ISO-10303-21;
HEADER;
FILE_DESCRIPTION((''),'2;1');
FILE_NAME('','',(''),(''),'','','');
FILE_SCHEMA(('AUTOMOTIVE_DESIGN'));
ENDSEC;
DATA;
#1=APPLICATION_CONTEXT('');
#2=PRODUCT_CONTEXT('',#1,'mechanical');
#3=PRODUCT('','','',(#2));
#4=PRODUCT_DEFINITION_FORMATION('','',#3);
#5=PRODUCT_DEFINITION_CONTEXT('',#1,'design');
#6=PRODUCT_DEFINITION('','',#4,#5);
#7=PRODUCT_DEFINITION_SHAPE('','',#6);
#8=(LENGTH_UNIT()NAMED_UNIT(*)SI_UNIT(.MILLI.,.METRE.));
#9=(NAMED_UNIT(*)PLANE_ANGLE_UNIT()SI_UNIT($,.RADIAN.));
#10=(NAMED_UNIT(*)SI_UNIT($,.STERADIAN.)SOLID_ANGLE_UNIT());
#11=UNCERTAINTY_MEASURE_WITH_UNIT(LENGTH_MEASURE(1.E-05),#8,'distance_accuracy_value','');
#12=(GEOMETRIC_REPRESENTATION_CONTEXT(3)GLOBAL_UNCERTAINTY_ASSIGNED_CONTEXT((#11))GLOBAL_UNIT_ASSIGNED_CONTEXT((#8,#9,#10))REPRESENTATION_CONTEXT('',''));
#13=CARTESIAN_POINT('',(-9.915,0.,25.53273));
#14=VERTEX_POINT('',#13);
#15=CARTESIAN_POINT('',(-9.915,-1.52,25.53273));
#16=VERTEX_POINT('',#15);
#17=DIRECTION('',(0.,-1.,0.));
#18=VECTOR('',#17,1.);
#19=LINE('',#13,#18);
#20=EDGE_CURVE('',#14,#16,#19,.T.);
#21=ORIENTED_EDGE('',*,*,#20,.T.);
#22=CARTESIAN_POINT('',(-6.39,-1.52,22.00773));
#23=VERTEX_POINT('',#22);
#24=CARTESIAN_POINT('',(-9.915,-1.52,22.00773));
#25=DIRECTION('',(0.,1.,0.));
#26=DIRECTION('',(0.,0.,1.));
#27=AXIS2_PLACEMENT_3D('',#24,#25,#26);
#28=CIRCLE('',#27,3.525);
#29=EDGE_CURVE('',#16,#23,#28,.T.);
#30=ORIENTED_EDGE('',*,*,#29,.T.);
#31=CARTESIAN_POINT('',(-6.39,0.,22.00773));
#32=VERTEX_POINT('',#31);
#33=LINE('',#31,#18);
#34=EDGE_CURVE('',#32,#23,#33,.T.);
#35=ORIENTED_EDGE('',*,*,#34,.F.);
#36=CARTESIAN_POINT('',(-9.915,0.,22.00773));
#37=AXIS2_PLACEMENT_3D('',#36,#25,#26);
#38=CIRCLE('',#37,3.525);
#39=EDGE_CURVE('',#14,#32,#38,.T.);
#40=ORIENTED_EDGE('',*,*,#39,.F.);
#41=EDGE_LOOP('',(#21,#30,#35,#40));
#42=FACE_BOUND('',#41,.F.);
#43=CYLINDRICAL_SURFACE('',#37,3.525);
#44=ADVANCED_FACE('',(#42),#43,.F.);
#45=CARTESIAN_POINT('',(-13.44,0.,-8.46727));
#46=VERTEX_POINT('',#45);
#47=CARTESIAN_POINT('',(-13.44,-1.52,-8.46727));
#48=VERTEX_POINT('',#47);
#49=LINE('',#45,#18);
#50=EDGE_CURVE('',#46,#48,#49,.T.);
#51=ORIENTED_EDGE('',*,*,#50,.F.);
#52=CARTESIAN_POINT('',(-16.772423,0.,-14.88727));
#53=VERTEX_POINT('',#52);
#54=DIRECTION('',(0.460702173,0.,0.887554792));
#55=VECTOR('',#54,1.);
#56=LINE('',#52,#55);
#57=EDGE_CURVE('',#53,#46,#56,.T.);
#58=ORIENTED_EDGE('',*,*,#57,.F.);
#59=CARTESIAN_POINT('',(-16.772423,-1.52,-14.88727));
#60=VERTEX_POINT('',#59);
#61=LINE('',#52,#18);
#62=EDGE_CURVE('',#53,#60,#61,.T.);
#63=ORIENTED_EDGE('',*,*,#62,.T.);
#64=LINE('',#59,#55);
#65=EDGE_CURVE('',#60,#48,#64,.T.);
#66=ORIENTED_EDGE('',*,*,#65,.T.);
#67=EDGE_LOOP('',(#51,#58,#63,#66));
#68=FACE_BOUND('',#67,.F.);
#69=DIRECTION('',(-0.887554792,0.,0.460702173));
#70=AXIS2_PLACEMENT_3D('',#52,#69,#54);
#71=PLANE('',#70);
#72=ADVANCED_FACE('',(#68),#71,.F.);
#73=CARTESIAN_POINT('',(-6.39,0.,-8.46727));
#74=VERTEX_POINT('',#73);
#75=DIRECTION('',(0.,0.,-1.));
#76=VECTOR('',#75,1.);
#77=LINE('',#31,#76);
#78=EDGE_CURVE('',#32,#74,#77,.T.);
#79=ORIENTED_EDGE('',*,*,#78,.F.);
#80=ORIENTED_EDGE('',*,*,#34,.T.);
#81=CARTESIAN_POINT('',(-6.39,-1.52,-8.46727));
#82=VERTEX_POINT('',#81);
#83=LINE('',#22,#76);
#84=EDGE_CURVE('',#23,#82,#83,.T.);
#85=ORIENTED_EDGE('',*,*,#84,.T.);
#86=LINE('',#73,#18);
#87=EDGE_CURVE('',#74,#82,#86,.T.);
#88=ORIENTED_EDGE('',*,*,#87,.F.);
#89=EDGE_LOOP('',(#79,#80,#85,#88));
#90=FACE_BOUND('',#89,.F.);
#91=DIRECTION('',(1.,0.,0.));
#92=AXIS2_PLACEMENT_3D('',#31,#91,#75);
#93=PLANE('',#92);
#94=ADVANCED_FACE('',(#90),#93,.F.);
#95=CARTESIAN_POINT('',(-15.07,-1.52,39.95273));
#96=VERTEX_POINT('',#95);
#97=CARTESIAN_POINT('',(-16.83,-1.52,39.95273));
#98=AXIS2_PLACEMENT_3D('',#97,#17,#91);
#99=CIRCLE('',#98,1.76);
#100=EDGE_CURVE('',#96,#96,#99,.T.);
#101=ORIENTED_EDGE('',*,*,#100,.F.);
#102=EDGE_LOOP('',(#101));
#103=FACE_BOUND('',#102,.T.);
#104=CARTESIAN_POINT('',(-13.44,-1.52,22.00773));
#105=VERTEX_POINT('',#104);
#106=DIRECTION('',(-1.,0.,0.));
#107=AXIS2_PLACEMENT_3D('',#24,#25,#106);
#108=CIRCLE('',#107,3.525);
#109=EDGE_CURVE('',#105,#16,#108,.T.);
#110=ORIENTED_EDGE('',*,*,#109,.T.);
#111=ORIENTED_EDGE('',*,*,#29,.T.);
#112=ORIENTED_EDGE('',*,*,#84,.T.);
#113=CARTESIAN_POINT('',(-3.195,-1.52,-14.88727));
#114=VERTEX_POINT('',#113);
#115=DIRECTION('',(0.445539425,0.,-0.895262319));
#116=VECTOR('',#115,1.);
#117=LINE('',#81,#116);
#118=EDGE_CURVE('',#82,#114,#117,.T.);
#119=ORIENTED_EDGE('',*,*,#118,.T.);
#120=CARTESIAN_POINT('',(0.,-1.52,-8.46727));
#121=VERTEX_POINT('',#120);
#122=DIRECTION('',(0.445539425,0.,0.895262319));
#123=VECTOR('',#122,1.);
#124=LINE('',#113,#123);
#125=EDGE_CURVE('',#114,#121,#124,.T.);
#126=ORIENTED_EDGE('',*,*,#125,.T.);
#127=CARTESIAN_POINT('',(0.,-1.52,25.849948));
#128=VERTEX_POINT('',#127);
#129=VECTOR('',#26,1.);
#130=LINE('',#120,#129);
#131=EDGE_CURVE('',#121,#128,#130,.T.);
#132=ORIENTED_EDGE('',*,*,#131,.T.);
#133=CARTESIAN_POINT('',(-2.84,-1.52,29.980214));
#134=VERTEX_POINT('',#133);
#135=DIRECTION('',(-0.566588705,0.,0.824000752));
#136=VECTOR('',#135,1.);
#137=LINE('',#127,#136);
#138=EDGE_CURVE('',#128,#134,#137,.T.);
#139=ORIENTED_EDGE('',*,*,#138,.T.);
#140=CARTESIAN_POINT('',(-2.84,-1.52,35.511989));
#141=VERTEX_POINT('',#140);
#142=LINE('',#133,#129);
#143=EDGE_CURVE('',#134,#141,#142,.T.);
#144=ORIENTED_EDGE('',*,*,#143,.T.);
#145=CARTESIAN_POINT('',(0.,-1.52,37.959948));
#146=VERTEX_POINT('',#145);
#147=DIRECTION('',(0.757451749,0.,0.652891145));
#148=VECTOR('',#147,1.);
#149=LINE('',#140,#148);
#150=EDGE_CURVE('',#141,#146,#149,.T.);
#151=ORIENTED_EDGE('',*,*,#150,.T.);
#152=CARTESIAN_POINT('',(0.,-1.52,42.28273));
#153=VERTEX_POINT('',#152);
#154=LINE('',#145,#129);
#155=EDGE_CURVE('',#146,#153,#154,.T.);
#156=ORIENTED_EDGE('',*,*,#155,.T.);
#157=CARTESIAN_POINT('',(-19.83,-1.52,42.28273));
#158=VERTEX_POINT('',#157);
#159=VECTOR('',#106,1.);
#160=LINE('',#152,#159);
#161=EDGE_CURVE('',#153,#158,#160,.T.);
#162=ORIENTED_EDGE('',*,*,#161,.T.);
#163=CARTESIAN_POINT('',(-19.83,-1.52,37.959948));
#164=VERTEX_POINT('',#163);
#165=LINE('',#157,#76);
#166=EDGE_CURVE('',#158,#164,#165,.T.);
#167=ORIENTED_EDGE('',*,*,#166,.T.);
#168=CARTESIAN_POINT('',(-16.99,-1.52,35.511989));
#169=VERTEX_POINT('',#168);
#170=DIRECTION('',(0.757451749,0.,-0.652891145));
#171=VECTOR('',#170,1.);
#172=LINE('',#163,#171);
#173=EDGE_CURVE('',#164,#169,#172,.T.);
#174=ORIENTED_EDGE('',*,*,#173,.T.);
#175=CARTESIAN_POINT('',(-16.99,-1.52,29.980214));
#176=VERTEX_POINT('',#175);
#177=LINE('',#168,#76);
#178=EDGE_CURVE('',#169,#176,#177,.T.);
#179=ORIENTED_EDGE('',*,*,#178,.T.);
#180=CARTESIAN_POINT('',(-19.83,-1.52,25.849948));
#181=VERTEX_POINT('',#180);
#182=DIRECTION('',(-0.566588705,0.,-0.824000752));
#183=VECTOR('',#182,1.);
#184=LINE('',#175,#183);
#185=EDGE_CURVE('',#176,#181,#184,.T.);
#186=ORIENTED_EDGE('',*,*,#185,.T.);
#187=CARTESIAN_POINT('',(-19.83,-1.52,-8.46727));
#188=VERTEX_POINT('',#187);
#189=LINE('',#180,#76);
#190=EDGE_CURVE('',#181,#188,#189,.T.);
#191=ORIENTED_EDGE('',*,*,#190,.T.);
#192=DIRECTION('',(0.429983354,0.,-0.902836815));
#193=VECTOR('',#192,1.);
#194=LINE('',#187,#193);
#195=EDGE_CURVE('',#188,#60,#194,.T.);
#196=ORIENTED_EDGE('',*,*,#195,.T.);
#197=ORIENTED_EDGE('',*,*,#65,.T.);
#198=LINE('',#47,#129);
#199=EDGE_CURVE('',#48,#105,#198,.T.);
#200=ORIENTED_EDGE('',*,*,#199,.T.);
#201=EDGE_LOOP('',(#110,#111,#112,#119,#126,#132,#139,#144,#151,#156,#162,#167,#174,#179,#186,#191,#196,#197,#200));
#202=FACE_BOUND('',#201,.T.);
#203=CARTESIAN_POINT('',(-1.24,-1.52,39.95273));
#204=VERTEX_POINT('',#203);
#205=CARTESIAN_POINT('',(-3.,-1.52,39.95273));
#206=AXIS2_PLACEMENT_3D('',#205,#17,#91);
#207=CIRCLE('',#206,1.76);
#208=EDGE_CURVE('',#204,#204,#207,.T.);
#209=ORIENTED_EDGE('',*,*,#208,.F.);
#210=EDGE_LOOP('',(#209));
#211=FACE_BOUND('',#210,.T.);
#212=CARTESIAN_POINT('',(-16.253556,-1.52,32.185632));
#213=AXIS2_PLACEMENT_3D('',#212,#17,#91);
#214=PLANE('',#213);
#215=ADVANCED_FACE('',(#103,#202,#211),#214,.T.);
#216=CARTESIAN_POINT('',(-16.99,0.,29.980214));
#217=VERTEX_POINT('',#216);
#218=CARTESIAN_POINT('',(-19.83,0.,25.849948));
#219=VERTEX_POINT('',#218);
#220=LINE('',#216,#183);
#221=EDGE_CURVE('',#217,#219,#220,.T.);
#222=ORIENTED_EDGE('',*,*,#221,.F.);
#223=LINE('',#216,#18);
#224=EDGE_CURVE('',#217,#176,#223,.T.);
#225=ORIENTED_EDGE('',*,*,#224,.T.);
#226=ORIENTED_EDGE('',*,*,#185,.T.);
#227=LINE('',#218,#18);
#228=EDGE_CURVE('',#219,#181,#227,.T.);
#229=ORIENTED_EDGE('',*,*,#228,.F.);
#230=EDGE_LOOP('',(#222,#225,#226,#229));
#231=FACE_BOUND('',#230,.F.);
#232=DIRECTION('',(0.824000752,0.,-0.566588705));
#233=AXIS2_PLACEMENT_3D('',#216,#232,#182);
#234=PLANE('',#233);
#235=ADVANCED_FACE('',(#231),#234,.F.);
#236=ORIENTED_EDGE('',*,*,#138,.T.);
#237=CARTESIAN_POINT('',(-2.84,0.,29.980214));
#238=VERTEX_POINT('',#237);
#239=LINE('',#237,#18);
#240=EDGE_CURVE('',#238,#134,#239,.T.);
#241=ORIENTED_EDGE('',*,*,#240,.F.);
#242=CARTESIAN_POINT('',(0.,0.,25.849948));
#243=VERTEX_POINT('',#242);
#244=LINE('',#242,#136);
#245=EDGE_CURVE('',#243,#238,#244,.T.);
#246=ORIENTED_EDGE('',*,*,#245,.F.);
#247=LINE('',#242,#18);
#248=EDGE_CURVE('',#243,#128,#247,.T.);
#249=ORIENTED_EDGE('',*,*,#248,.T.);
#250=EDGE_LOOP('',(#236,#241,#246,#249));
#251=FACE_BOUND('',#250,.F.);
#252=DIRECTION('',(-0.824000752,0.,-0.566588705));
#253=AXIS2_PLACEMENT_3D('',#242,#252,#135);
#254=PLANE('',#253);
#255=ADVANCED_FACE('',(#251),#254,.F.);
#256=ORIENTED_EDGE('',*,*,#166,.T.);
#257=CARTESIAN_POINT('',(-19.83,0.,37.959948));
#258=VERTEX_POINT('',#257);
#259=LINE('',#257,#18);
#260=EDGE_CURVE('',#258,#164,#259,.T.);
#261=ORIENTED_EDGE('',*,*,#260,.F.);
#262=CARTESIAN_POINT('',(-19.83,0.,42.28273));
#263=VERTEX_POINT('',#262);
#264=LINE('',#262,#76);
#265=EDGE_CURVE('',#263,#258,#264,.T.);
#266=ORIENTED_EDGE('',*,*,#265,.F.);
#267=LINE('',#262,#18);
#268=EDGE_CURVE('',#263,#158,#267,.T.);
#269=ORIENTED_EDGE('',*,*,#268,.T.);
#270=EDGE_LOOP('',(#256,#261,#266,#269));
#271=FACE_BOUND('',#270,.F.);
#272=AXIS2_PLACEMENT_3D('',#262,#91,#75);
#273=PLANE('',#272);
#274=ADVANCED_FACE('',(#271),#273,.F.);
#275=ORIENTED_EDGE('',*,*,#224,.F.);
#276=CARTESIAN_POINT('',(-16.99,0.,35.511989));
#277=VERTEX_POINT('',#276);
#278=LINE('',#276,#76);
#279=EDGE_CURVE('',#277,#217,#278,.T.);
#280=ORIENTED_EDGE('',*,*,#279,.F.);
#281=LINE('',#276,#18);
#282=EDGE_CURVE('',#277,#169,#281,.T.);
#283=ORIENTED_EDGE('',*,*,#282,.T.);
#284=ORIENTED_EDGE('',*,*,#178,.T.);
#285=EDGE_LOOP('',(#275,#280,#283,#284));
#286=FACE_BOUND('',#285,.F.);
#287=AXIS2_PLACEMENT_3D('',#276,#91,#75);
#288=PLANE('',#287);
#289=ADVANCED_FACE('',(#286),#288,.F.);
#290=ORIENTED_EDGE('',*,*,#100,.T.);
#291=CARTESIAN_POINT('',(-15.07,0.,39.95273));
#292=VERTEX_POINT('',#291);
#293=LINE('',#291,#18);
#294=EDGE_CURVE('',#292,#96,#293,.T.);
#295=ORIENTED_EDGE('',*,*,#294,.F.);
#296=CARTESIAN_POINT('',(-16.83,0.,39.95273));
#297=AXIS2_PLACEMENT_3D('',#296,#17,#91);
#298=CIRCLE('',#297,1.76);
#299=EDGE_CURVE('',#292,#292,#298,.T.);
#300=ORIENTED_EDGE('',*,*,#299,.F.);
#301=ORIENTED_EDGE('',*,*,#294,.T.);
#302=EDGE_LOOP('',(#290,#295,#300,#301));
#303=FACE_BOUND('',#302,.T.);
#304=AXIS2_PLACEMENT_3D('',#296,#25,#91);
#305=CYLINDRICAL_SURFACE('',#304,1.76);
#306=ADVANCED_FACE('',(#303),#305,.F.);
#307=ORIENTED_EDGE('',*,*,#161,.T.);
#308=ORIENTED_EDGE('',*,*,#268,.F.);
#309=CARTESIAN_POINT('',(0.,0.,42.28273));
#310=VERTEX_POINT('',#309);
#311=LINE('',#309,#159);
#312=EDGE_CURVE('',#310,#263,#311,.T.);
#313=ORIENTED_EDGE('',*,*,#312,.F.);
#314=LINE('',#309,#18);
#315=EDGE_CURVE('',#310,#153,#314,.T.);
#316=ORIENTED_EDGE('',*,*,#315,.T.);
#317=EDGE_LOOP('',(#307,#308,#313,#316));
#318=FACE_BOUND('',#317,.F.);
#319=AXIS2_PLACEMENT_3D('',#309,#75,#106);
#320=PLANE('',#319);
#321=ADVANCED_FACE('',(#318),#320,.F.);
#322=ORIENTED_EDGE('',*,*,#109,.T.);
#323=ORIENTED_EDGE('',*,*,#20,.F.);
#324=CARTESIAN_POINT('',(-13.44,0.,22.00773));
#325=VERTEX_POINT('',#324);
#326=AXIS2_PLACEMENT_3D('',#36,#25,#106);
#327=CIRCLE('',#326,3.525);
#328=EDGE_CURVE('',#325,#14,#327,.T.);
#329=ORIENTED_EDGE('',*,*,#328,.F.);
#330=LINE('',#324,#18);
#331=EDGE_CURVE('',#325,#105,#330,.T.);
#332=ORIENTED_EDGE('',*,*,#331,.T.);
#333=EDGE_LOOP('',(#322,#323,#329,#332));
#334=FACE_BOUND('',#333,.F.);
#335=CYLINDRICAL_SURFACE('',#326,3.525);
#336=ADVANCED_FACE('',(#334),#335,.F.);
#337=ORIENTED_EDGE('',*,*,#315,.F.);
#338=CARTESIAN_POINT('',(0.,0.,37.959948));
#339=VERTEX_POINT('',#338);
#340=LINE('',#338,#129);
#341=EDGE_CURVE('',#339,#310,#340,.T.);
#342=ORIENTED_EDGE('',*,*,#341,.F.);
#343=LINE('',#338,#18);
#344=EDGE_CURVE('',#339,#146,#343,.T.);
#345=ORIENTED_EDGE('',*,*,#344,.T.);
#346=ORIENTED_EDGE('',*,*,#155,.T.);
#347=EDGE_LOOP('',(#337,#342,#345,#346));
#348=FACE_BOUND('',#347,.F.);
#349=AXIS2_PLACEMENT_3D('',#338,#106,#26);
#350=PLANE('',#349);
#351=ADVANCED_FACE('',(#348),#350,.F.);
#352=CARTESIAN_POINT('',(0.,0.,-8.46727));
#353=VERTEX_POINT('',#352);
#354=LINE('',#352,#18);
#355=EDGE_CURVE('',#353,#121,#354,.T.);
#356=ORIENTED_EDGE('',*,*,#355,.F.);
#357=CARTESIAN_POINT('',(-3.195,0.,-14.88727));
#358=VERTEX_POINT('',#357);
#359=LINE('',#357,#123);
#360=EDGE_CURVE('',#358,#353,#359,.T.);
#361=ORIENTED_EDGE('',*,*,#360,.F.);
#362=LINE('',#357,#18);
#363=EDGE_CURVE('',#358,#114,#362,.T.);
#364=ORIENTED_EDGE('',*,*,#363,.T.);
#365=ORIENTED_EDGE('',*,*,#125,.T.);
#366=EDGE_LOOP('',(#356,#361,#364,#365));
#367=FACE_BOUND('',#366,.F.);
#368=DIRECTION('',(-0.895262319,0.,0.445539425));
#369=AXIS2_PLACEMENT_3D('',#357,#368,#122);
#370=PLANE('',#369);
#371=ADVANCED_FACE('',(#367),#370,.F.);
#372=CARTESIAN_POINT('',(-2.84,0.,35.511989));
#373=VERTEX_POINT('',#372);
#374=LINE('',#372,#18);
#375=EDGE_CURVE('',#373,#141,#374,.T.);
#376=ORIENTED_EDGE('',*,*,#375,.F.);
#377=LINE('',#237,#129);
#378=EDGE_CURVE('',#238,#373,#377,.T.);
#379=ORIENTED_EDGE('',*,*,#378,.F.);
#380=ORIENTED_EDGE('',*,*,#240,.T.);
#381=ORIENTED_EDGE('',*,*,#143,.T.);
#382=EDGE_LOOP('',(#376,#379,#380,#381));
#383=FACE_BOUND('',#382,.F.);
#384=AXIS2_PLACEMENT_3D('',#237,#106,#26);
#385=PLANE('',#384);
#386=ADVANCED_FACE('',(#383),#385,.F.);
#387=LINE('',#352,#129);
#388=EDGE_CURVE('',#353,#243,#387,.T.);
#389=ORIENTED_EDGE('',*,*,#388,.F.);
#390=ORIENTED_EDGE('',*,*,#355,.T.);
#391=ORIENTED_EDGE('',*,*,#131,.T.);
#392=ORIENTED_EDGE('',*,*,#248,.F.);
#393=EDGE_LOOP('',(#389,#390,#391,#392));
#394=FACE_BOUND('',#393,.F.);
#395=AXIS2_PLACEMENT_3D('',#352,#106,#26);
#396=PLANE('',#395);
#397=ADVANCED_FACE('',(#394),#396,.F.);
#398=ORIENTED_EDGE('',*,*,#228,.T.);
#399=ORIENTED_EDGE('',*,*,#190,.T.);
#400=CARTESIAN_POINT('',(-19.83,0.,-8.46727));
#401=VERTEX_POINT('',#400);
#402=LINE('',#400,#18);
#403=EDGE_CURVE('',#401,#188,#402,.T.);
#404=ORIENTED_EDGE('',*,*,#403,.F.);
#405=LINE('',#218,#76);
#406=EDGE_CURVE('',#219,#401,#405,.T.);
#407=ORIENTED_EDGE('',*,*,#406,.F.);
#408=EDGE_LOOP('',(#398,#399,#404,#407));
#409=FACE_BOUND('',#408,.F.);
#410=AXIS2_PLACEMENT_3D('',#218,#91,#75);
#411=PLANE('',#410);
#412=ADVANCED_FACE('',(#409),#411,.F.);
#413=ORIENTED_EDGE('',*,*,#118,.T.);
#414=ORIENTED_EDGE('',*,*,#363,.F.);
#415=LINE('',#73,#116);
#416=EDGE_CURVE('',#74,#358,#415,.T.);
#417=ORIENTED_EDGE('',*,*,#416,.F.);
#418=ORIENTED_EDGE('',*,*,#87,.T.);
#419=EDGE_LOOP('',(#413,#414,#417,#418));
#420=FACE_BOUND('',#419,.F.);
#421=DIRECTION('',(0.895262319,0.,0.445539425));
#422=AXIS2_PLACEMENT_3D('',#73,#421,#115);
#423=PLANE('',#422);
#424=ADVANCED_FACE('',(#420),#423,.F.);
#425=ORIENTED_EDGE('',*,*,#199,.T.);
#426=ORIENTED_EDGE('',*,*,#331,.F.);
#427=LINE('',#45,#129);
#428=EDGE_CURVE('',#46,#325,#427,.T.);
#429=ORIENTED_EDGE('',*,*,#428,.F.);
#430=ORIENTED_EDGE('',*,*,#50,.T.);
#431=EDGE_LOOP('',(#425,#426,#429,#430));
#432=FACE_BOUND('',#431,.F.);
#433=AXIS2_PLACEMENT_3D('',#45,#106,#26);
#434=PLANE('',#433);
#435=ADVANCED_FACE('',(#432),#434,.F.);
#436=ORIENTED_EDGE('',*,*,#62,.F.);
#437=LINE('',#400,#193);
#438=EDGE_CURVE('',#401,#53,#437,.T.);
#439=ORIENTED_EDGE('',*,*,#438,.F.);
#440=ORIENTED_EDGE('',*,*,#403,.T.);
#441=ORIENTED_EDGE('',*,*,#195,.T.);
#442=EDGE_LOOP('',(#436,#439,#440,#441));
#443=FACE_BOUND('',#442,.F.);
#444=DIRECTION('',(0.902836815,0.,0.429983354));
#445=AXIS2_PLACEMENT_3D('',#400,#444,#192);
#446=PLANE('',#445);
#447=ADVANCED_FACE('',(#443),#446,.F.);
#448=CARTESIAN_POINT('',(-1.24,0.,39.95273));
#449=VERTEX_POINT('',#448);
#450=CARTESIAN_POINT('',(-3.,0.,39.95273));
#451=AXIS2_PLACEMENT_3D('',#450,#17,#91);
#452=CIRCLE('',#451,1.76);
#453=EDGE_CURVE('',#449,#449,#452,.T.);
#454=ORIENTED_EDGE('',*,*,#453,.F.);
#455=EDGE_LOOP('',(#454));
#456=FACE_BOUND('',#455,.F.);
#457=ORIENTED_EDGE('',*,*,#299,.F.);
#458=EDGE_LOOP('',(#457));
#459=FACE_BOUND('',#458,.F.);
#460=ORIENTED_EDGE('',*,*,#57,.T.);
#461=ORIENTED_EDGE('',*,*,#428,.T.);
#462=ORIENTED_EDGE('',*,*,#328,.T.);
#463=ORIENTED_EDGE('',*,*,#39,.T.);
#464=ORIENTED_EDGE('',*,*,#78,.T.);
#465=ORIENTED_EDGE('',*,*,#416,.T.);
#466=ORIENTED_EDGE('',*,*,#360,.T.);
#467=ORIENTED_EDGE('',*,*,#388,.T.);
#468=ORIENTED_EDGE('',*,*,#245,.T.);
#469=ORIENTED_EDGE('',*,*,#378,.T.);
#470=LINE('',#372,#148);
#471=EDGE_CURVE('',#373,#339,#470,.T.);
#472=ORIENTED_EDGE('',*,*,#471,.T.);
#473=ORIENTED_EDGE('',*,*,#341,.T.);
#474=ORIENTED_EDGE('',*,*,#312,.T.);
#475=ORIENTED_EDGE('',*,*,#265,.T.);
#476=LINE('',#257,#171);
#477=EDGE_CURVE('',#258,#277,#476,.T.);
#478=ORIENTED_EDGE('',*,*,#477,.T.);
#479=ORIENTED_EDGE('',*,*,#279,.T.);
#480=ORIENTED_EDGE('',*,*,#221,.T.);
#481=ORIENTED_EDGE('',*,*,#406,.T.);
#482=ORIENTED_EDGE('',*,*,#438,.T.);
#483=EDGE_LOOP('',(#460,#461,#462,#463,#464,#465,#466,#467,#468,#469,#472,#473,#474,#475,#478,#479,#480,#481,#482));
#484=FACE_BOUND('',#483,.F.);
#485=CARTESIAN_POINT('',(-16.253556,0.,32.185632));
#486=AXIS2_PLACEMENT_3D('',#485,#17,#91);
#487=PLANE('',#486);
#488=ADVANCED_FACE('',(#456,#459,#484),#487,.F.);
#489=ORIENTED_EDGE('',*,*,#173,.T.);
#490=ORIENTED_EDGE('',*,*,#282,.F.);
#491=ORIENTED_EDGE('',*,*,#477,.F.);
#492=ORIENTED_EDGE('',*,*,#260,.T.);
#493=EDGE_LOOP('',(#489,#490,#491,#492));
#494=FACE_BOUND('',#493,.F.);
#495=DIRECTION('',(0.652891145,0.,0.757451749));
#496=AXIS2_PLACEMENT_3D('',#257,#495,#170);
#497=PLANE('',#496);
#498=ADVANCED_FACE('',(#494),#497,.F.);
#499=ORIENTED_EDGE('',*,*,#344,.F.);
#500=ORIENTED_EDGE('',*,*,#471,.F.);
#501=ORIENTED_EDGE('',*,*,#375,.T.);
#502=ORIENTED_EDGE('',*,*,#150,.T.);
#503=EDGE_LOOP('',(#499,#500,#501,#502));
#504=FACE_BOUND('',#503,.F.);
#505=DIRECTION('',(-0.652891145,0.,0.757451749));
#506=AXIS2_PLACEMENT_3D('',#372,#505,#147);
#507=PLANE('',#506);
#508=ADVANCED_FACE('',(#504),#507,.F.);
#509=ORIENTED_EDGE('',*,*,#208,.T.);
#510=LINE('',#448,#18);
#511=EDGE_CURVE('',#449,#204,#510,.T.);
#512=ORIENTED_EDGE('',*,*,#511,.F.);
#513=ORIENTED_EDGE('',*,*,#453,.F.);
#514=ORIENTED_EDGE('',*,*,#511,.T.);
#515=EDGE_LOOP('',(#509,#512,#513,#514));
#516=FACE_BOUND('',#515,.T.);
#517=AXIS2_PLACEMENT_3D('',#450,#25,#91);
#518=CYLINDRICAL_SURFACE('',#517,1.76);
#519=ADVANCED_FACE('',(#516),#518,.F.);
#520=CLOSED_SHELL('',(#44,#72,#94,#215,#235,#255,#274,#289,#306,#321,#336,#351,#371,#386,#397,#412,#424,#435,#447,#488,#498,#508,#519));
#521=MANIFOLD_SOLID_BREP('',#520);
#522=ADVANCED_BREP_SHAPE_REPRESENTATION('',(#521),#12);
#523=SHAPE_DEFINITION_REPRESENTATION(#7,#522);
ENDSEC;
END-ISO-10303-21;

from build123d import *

# Parameters (mm, degrees)
F0_R     = 1.76
F1_DEPTH = 1.52


# Not quite as in the source:
# - a feature of the source that left no trace in its solid (it failed there, or was rolled back) is left out


with BuildPart() as f1:
    # F0 (on Front) → F1 (new body)
    with BuildSketch(Plane.XZ):
        Polygon((-13.44, 42.2827300502), (-19.83, 42.2827300502), (-19.83, 41.2284731865), (-19.83, 38.147136569), (-19.83, 37.9599481821), (-16.99, 35.5119891465), (-16.99, 29.9802143127), (-19.83, 25.8499481821), (-19.83, 25.4327300502), (-19.83, 22.0077300502), (-13.44, 22.0077300502), align=None)
        with Locations((-16.83, 39.9527300502)):
            Circle(F0_R, mode=Mode.SUBTRACT)
        with BuildLine():
            Line((-9.915, 42.2827300502), (-13.44, 42.2827300502))
            Line((-13.44, 42.2827300502), (-13.44, 22.0077300502))
            ThreePointArc((-13.44, 22.0077300502), (-12.4075514037, 24.5002814538), (-9.915, 25.5327300502))
            Line((-9.915, 25.5327300502), (-9.915, 42.2827300502))
        make_face()
        Polygon((-13.44, 22.0005065203), (-13.44, 22.0077300502), (-19.83, 22.0077300502), (-19.83, -8.4672699498), (-13.44, -8.4672699498), align=None)
        with BuildLine():
            Line((-6.39, 42.2827300502), (-9.915, 42.2827300502))
            Line((-9.915, 42.2827300502), (-9.915, 25.5327300502))
            ThreePointArc((-9.915, 25.5327300502), (-7.4224485963, 24.5002814538), (-6.39, 22.0077300502))
            Line((-6.39, 22.0077300502), (-6.39, 23.0757091194))
            Line((-6.39, 23.0757091194), (-6.39, 42.2827300502))
        make_face()
        Polygon((0, 42.2827300502), (-6.39, 42.2827300502), (-6.39, 23.0757091194), (-6.39, 22.0077300502), (-6.39, -8.4672699498), (0, -8.4672699498), (0, 25.4327300502), (0, 25.8499481821), (-2.84, 29.9802143127), (-2.84, 35.5119891465), (0, 37.9599481821), (0, 41.2284731865), align=None)
        with Locations((-3, 39.9527300502)):
            Circle(F0_R, mode=Mode.SUBTRACT)
        Polygon((-16.7724229395, -14.8872699498), (-13.44, -8.4672699498), (-19.83, -8.4672699498), align=None)
        Polygon((0, -8.4672699498), (-6.39, -8.4672699498), (-3.195, -14.8872699498), align=None)
    extrude(amount=F1_DEPTH)


solid = f1.part
